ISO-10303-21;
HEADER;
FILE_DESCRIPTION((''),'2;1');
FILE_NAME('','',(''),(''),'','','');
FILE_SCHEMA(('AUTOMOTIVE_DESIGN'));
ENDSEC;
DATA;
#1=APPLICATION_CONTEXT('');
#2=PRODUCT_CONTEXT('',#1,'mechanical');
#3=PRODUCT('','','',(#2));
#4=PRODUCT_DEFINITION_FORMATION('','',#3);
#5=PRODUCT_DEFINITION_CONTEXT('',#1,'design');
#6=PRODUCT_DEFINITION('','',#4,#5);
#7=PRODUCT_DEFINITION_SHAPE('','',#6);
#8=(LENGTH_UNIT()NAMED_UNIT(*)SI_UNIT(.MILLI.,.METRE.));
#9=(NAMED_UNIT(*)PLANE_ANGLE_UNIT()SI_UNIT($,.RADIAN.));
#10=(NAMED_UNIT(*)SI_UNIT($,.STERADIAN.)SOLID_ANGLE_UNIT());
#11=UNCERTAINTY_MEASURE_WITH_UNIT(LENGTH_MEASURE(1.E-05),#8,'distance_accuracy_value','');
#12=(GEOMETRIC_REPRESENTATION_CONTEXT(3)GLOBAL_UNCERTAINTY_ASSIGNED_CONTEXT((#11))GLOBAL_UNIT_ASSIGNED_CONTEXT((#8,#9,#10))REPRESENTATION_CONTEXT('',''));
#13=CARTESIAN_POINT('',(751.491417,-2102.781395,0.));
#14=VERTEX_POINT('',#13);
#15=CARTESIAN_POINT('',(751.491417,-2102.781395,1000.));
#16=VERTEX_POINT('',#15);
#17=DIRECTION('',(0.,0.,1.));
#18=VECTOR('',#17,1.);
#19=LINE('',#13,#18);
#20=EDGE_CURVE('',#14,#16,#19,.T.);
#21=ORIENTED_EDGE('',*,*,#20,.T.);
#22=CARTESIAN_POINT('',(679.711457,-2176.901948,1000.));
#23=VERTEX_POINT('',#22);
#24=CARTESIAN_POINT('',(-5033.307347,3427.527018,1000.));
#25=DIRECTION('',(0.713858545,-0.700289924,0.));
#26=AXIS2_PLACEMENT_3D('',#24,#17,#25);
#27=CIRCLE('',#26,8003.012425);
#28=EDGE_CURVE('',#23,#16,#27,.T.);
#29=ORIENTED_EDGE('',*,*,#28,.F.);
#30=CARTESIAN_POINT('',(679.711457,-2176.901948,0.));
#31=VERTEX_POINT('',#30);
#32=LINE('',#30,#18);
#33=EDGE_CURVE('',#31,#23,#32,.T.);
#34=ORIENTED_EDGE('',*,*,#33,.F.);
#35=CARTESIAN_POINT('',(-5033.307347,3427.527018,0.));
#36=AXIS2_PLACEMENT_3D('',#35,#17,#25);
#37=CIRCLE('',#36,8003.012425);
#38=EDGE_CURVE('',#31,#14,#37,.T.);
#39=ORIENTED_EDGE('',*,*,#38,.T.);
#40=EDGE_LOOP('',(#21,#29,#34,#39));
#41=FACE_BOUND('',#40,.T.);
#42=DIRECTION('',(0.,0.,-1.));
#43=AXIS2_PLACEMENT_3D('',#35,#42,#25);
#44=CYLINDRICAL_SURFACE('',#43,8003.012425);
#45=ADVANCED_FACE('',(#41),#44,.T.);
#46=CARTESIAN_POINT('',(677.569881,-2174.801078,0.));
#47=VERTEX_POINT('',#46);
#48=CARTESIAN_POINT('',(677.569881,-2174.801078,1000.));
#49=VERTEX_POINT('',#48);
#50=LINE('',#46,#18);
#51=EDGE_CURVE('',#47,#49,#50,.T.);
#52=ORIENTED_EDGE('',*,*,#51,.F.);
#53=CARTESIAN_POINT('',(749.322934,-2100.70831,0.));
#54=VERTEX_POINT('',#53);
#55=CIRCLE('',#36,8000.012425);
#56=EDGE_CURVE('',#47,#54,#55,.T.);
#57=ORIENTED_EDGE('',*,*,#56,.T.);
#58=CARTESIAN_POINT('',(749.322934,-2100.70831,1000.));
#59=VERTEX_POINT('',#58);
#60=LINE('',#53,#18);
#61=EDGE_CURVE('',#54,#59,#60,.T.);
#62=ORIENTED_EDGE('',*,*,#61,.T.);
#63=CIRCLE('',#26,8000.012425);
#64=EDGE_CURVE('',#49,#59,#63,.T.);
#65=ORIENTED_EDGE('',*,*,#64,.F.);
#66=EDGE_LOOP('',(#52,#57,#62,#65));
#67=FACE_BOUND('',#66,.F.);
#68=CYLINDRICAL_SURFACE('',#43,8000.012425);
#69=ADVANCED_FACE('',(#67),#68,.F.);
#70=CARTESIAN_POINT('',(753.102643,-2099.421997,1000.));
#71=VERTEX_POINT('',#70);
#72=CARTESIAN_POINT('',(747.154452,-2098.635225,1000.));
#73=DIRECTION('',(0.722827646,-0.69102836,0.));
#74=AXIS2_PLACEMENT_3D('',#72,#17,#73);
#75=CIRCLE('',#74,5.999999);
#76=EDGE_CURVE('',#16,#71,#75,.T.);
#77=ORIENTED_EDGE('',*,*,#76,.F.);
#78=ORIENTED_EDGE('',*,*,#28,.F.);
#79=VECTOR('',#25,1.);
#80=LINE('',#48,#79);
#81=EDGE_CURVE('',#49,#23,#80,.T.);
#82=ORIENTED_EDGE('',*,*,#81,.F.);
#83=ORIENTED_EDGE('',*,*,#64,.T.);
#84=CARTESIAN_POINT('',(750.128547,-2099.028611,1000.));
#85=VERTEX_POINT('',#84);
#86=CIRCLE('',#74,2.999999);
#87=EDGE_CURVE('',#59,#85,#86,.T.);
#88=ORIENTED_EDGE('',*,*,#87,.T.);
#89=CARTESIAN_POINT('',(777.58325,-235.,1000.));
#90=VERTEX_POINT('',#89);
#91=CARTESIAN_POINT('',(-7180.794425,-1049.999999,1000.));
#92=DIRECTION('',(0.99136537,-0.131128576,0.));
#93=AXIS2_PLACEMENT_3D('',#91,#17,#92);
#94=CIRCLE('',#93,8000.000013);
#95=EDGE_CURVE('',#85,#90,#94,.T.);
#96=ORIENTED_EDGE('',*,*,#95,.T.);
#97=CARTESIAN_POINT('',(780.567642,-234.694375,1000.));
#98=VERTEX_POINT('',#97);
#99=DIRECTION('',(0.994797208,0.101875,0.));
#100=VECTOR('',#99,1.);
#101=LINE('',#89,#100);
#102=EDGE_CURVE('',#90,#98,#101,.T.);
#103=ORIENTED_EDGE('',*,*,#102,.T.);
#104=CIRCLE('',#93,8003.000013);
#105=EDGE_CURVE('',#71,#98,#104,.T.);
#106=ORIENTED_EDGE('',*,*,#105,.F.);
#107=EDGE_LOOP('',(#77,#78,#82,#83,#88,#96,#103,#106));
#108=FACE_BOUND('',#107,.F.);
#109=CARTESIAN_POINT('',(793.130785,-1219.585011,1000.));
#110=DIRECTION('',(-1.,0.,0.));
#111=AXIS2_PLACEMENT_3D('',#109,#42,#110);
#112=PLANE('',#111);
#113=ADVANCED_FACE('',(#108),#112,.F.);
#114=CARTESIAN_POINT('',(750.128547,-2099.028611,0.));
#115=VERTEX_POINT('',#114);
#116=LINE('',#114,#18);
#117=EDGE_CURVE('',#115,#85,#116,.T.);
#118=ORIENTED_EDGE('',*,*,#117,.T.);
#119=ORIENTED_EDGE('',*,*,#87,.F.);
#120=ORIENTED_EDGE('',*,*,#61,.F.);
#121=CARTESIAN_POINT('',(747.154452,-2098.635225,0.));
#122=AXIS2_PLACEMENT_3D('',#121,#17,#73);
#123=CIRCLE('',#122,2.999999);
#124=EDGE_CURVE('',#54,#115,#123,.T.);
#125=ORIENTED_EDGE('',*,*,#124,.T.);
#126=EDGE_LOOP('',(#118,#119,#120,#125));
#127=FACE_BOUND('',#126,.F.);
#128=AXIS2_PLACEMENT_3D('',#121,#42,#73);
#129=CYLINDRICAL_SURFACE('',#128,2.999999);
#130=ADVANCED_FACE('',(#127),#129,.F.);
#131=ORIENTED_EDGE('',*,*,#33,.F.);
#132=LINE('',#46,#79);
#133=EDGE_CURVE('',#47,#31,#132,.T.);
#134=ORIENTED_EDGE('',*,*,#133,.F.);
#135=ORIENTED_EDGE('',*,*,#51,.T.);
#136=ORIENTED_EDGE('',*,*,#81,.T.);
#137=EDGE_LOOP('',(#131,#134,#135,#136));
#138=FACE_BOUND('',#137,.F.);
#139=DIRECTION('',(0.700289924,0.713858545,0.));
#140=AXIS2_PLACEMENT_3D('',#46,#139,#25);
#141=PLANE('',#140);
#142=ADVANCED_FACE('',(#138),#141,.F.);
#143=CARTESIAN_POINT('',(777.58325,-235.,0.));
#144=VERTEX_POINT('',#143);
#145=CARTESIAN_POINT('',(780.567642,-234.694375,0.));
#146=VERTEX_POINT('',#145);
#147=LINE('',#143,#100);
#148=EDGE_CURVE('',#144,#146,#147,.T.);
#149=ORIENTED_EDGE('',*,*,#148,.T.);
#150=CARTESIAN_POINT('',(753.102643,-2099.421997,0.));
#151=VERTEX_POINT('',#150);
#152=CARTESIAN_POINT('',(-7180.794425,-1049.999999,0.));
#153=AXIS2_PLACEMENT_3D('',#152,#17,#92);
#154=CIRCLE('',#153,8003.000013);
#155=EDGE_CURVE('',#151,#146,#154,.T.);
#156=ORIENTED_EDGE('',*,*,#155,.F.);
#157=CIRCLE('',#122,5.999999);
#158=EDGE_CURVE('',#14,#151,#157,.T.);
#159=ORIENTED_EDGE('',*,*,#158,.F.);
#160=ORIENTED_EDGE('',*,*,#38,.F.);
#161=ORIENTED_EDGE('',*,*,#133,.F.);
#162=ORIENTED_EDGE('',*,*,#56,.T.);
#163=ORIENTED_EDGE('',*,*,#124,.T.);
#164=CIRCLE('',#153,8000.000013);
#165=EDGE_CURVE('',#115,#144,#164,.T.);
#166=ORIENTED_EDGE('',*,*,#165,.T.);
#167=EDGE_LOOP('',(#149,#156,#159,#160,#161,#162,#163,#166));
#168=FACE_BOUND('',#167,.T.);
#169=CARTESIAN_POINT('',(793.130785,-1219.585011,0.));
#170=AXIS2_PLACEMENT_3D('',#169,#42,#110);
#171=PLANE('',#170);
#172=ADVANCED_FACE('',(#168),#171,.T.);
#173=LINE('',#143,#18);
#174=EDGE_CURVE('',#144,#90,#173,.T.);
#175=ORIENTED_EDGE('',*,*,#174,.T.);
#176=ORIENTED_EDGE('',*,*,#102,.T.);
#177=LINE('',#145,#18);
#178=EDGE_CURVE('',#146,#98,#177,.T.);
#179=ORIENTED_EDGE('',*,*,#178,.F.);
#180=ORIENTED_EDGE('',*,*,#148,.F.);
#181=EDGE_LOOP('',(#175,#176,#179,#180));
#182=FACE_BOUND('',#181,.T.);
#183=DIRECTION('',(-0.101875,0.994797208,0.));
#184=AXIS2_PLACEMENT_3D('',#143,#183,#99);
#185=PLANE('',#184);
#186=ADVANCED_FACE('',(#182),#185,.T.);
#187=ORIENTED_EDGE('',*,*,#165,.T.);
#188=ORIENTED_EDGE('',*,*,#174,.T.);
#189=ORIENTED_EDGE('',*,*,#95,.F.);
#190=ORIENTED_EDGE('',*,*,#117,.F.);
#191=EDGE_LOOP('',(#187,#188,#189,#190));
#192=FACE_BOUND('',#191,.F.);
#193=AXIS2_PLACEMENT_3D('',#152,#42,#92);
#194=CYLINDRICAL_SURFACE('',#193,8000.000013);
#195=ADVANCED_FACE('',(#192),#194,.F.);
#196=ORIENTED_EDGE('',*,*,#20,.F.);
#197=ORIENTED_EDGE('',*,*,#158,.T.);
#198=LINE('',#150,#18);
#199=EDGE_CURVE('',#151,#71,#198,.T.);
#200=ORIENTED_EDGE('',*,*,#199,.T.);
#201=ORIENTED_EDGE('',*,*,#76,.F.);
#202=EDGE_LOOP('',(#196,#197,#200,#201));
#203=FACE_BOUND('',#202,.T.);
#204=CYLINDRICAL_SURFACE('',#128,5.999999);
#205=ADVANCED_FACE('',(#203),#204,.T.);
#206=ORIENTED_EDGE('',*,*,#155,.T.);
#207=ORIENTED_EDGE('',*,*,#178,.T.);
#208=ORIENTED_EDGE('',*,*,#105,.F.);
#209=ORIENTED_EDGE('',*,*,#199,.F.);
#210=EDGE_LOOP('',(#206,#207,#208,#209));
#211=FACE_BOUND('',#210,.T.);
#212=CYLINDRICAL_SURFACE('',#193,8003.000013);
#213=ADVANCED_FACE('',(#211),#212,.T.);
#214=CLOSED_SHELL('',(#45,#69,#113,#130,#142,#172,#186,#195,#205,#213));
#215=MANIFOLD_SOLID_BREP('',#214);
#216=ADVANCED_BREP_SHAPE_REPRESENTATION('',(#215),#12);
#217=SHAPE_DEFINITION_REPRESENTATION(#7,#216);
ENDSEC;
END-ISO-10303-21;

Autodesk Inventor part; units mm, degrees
ref_plane "YZ Plane" through (0, 0, 0) normal (1, 0, 0) x (0, 1, 0)
ref_plane "XZ Plane" through (0, 0, 0) normal (0, 1, 0) x (-1, 0, 0)
ref_plane "XY Plane" through (0, 0, 0) normal (0, 0, 1) x (1, 0, 0)
sketch "Sketch1" plane through (0, 0, 0) normal (0, 0, 1) x (1, 0, 0)
  line L0 (-750, 0) -> (750, 0) construction
  line L1 (750, 0) -> (750, -2100) construction
  line L2 (750, -2100) -> (110, -2700) construction
  line L3 (108.907697, -2700) -> (-108.907697, -2700) construction
  line L4 (-110, -2700) -> (-750, -2100) construction
  line L5 (-750, -2100) -> (-750, 0) construction
  arc A0 (745.236855, 0.447083) -> (-745.236855, 0.447083) centre (0, -7964.766161) ccw construction
  arc A1 (-750.626493, -4.742884) -> (-777.58325, -235) centre (7180.794412, -1050) ccw construction
  arc A2 (-777.58325, -235) -> (-750.128547, -2099.028611) centre (7180.794412, -1050) ccw construction
  arc A3 (750.128547, -2099.028611) -> (777.58325, -235) centre (-7180.794412, -1050) ccw
  arc A4 (777.58325, -235) -> (750.626493, -4.742884) centre (-7180.794412, -1050) ccw construction
  line L6 (-777.58325, -235) -> (777.58325, -235) construction
  arc A5 (-749.322934, -2100.70831) -> (-677.569881, -2174.801078) centre (5033.298449, 3427.518345) ccw construction
  line L7 (-750, -2100) -> (750, -2100) construction
  line L8 (-547.172872, -2035.710935) -> (-801.083389, -2306.54882) construction
  arc A6 (-677.569881, -2174.801078) -> (-110.836747, -2699.297556) centre (5033.298449, 3427.518345) ccw construction
  arc A7 (-745.236855, 0.447083) -> (-750.626493, -4.742884) centre (-744.677927, -5.526826) ccw construction
  arc A8 (750.626493, -4.742884) -> (745.236855, 0.447083) centre (744.677927, -5.526826) ccw construction
  arc A9 (-750.128547, -2099.028611) -> (-749.322934, -2100.70831) centre (-747.154451, -2098.635225) ccw construction
  arc A10 (110.836747, -2699.297556) -> (677.569881, -2174.801078) centre (-5033.298449, 3427.518345) ccw construction
  line L9 (553.81945, -2042.800618) -> (794.436811, -2299.459137) construction
  arc A11 (677.569881, -2174.801078) -> (749.322934, -2100.70831) centre (-5033.298449, 3427.518345) ccw
  arc A12 (749.322934, -2100.70831) -> (750.128547, -2099.028611) centre (747.154451, -2098.635225) ccw
  arc A13 (-110.836747, -2699.297556) -> (-108.907697, -2700) centre (-108.907697, -2697) ccw construction
  arc A14 (108.907697, -2700) -> (110.836747, -2699.297556) centre (108.907697, -2697) ccw construction
  point P0 (0, 0)
  point P1 (0, 0)
  point P2 (0, 0)
  point P3 (0, -2700)
  point P4 (-674.128131, -2171.129877)
  point P5 (674.128131, -2171.129877)
  dimension "d19" = 1500
  dimension "d20" = 2100
  dimension "d21" = 220
  dimension "d22" = 2700
  dimension "d23" = 8000
  dimension "d24" = 8000
  dimension "d25" = 8000
  dimension "d26" = 235
  dimension "d27" = 8000
  dimension "d28" = 104
  dimension "d29" = 6
  dimension "d30" = 3
  dimension "d31" = 8000
  dimension "d32" = 104
  dimension "d33" = 3
contour flange "Contour Flange1" sketch "Sketch1" thickness 3 bend radius 3 width 1000 along (0, 0, 1) mid plane no both sides no wall seen from (713.565816, -2137.870332, 0) lies toward (0.718358, -0.6956736, 0) curves A11 A12 A3
bend "Bend1"
corner "Corner1"
equation "\"d19\" = d34"
equation "\"d20\" = d35"
equation "\"d21\" = d36"
equation "\"d22\" = d37"
equation "\"d24\" = d38"
equation "\"d25\" = d38"
equation "\"d26\" = d39"
equation "\"d27\" = d38"
equation "\"d28\" = d40"
equation "\"d29\" = d41 + d42"
equation "\"d30\" = d41"
equation "\"d31\" = d38"
equation "\"d8\" = Thickness"
equation "\"d9\" = BendReliefWidth"
equation "\"d10\" = BendReliefDepth"
equation "\"d11\" = MinimumRemnant"
equation "\"d12\" = TransitionRadius"
equation "\"d14\" = BendRadius"
equation "\"d16\" = CornerReliefSize"
equation "\"d17\" = GapSize"
equation "\"d18\" = JacobiRadiusSize"
equation "\"d32\" = d28"
equation "\"BendRadius\" = Thickness"
equation "\"BendReliefWidth\" = Thickness"
equation "\"BendReliefDepth\" = 0.5 * Thickness"
equation "\"CornerReliefSize\" = 4 * Thickness"
equation "\"MinimumRemnant\" = 2 * Thickness"
equation "\"TransitionRadius\" = BendRadius"
equation "\"JacobiRadiusSize\" = BendRadius"
equation "\"GapSize\" = Thickness"
equation "\"d42\" = d41"
equation "\"d34\" = 1500"
equation "\"d35\" = 2100"
equation "\"d36\" = 220"
equation "\"d38\" = 8000"
equation "\"d39\" = 235"
equation "\"d41\" = 3"
equation "\"Thickness\" = 3"
equation "\"d37\" = 2700"
equation "\"d40\" = 104"
properties part number "МОО 020 лист борт 1  Глеб_CPY"
